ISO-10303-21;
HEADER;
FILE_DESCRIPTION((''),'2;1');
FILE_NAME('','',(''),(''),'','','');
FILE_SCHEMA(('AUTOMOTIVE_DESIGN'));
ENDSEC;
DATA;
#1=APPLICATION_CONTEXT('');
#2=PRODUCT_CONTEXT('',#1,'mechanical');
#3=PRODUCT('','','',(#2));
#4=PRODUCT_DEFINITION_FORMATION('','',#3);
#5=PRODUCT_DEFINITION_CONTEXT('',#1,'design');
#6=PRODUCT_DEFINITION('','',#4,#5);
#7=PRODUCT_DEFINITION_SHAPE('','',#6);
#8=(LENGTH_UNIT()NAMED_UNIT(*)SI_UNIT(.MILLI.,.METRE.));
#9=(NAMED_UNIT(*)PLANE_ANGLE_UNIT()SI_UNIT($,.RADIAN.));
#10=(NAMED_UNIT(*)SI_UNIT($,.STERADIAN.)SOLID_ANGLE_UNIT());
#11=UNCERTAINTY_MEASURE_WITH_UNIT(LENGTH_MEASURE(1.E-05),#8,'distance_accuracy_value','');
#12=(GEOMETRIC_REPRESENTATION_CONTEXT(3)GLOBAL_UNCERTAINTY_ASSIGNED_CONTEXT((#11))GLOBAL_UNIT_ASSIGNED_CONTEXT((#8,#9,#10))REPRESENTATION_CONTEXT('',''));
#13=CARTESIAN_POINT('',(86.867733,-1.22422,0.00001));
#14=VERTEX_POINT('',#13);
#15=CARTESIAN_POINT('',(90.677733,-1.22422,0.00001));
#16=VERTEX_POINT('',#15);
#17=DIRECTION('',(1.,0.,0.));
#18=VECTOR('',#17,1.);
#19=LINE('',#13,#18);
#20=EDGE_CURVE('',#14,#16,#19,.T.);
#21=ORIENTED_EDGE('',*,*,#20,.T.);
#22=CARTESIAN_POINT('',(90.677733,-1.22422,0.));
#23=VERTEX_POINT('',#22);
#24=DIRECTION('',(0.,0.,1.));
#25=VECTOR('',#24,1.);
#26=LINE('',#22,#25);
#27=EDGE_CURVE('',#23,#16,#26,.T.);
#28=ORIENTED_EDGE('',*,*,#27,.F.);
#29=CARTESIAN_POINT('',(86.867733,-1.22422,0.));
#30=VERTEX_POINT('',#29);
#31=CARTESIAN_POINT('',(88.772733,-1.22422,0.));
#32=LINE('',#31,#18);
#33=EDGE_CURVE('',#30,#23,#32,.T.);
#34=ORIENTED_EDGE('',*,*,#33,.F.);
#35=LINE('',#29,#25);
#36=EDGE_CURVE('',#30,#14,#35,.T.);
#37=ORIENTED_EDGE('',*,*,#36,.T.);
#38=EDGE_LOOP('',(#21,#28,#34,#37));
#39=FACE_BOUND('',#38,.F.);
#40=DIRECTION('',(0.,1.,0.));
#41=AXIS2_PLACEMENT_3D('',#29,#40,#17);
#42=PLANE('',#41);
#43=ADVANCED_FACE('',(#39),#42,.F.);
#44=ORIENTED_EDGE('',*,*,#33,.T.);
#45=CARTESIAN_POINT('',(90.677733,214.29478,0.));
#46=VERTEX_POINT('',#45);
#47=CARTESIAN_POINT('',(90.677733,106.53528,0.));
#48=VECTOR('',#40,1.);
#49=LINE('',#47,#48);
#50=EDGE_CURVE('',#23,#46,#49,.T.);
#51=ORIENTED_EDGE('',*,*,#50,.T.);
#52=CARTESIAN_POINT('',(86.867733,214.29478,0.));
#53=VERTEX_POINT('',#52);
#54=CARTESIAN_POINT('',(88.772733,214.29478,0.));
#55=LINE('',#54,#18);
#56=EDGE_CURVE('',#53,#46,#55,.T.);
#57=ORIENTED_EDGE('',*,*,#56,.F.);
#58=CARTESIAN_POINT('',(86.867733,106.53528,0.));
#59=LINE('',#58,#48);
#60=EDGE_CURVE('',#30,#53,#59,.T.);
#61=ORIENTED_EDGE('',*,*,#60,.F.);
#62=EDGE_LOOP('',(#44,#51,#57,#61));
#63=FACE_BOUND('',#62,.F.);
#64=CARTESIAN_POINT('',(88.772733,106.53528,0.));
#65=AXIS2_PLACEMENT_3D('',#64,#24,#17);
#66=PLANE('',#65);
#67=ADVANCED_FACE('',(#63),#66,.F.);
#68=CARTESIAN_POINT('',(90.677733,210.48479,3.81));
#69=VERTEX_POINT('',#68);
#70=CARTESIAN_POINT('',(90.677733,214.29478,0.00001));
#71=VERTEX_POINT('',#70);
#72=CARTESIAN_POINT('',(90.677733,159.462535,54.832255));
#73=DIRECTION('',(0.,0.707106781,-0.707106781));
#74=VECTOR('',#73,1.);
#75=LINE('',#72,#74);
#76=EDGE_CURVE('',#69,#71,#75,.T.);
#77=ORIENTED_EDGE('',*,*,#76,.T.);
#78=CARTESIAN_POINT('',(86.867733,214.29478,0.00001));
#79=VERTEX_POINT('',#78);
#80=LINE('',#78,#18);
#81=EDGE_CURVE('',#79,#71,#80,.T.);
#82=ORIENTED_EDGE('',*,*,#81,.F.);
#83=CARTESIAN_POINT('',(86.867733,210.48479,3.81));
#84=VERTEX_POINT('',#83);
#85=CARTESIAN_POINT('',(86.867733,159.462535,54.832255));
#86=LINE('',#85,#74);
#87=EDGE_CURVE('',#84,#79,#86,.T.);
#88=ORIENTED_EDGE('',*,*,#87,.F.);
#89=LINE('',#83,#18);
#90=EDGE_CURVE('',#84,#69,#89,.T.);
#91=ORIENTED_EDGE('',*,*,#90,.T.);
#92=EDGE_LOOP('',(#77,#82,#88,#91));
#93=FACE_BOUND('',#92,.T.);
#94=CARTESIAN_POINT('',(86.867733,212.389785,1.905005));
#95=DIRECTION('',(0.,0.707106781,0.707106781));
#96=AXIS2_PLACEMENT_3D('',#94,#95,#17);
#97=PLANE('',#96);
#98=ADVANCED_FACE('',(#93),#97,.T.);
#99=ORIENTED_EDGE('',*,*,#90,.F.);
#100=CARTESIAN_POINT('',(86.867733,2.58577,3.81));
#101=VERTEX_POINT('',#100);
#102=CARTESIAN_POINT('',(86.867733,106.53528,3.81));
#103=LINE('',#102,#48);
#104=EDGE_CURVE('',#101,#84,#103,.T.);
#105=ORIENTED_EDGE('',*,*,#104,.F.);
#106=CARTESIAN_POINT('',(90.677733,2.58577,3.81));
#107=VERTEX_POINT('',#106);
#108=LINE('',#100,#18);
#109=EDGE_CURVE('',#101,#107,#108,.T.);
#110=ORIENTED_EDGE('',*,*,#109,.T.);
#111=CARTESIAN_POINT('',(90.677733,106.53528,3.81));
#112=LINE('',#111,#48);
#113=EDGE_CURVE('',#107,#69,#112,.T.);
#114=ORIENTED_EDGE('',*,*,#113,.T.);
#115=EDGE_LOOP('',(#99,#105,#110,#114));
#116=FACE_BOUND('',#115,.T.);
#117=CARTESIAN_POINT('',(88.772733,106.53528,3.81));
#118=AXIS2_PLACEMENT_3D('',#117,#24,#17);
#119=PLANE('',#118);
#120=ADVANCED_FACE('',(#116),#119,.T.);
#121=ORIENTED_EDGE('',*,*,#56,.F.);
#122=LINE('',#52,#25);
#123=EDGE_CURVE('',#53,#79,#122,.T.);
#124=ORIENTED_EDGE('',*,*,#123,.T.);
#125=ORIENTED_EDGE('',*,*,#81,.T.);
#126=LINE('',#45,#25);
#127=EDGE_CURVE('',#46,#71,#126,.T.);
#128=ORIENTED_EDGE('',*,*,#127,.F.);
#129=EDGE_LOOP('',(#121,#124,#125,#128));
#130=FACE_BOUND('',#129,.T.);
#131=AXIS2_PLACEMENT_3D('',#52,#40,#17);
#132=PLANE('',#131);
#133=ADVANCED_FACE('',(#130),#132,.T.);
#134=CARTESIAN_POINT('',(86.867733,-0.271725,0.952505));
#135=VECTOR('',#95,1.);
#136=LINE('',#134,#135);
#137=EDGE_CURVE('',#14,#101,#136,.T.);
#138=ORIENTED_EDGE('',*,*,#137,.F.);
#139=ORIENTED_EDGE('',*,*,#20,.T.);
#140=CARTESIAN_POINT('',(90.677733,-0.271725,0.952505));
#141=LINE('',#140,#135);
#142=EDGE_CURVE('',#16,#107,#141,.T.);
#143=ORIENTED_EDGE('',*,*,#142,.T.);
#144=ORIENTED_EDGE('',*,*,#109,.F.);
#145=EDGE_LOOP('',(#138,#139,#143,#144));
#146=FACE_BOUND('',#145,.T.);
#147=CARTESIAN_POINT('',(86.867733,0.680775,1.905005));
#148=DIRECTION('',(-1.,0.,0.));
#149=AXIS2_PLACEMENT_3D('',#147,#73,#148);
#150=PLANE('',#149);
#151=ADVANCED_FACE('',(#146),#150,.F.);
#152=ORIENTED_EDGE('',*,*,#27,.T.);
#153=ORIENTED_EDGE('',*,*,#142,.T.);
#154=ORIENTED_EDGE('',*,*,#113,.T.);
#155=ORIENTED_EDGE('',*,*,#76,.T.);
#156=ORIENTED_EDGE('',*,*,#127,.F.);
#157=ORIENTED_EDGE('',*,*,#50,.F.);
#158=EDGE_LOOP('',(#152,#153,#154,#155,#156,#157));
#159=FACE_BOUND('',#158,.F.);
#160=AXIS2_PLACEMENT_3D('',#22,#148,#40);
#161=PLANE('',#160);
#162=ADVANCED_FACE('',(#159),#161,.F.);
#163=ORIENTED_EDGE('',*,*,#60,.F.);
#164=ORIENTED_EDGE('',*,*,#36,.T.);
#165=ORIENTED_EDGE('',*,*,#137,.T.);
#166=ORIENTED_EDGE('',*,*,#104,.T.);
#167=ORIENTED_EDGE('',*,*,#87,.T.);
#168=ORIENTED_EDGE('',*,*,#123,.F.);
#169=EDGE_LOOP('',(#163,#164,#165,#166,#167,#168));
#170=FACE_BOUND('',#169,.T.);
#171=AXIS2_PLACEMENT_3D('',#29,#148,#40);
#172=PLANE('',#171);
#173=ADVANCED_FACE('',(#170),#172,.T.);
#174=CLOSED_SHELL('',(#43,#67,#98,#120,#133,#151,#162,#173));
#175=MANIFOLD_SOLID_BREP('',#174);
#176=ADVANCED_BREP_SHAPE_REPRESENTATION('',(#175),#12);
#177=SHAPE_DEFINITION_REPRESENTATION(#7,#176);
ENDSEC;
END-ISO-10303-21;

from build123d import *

# Parameters (mm, degrees)
F0_W     = 3.81
F0_H     = 215.519
F1_DEPTH = 3.81
F2_SIZE  = 3.80999
F3_SIZE  = 3.80999


# Not quite as in the source:
# - a fillet or chamfer is up to 0.001 mm smaller than in the source, because OpenCascade refuses the exact size


with BuildPart() as f1:
    # F0 (on Top) → F1 (new body)
    with BuildSketch(Plane.XY):
        with Locations((88.7727327645, 106.5352801529)):
            Rectangle(F0_W, F0_H)
    extrude(amount=F1_DEPTH)

    # F2 (size 3.81 in the source; OpenCascade refuses exactly that, so slightly less here)
    f2_edges = [f1.edges().sort_by_distance(p)[0] for p in [
        (88.772733, -1.22422, 3.81),
    ]]
    chamfer(f2_edges, length=F2_SIZE)

    # F3 (size 3.81 in the source; OpenCascade refuses exactly that, so slightly less here)
    f3_edges = [f1.edges().sort_by_distance(p)[0] for p in [
        (88.772733, 214.29478, 3.81),
    ]]
    chamfer(f3_edges, length=F3_SIZE)


solid = f1.part
